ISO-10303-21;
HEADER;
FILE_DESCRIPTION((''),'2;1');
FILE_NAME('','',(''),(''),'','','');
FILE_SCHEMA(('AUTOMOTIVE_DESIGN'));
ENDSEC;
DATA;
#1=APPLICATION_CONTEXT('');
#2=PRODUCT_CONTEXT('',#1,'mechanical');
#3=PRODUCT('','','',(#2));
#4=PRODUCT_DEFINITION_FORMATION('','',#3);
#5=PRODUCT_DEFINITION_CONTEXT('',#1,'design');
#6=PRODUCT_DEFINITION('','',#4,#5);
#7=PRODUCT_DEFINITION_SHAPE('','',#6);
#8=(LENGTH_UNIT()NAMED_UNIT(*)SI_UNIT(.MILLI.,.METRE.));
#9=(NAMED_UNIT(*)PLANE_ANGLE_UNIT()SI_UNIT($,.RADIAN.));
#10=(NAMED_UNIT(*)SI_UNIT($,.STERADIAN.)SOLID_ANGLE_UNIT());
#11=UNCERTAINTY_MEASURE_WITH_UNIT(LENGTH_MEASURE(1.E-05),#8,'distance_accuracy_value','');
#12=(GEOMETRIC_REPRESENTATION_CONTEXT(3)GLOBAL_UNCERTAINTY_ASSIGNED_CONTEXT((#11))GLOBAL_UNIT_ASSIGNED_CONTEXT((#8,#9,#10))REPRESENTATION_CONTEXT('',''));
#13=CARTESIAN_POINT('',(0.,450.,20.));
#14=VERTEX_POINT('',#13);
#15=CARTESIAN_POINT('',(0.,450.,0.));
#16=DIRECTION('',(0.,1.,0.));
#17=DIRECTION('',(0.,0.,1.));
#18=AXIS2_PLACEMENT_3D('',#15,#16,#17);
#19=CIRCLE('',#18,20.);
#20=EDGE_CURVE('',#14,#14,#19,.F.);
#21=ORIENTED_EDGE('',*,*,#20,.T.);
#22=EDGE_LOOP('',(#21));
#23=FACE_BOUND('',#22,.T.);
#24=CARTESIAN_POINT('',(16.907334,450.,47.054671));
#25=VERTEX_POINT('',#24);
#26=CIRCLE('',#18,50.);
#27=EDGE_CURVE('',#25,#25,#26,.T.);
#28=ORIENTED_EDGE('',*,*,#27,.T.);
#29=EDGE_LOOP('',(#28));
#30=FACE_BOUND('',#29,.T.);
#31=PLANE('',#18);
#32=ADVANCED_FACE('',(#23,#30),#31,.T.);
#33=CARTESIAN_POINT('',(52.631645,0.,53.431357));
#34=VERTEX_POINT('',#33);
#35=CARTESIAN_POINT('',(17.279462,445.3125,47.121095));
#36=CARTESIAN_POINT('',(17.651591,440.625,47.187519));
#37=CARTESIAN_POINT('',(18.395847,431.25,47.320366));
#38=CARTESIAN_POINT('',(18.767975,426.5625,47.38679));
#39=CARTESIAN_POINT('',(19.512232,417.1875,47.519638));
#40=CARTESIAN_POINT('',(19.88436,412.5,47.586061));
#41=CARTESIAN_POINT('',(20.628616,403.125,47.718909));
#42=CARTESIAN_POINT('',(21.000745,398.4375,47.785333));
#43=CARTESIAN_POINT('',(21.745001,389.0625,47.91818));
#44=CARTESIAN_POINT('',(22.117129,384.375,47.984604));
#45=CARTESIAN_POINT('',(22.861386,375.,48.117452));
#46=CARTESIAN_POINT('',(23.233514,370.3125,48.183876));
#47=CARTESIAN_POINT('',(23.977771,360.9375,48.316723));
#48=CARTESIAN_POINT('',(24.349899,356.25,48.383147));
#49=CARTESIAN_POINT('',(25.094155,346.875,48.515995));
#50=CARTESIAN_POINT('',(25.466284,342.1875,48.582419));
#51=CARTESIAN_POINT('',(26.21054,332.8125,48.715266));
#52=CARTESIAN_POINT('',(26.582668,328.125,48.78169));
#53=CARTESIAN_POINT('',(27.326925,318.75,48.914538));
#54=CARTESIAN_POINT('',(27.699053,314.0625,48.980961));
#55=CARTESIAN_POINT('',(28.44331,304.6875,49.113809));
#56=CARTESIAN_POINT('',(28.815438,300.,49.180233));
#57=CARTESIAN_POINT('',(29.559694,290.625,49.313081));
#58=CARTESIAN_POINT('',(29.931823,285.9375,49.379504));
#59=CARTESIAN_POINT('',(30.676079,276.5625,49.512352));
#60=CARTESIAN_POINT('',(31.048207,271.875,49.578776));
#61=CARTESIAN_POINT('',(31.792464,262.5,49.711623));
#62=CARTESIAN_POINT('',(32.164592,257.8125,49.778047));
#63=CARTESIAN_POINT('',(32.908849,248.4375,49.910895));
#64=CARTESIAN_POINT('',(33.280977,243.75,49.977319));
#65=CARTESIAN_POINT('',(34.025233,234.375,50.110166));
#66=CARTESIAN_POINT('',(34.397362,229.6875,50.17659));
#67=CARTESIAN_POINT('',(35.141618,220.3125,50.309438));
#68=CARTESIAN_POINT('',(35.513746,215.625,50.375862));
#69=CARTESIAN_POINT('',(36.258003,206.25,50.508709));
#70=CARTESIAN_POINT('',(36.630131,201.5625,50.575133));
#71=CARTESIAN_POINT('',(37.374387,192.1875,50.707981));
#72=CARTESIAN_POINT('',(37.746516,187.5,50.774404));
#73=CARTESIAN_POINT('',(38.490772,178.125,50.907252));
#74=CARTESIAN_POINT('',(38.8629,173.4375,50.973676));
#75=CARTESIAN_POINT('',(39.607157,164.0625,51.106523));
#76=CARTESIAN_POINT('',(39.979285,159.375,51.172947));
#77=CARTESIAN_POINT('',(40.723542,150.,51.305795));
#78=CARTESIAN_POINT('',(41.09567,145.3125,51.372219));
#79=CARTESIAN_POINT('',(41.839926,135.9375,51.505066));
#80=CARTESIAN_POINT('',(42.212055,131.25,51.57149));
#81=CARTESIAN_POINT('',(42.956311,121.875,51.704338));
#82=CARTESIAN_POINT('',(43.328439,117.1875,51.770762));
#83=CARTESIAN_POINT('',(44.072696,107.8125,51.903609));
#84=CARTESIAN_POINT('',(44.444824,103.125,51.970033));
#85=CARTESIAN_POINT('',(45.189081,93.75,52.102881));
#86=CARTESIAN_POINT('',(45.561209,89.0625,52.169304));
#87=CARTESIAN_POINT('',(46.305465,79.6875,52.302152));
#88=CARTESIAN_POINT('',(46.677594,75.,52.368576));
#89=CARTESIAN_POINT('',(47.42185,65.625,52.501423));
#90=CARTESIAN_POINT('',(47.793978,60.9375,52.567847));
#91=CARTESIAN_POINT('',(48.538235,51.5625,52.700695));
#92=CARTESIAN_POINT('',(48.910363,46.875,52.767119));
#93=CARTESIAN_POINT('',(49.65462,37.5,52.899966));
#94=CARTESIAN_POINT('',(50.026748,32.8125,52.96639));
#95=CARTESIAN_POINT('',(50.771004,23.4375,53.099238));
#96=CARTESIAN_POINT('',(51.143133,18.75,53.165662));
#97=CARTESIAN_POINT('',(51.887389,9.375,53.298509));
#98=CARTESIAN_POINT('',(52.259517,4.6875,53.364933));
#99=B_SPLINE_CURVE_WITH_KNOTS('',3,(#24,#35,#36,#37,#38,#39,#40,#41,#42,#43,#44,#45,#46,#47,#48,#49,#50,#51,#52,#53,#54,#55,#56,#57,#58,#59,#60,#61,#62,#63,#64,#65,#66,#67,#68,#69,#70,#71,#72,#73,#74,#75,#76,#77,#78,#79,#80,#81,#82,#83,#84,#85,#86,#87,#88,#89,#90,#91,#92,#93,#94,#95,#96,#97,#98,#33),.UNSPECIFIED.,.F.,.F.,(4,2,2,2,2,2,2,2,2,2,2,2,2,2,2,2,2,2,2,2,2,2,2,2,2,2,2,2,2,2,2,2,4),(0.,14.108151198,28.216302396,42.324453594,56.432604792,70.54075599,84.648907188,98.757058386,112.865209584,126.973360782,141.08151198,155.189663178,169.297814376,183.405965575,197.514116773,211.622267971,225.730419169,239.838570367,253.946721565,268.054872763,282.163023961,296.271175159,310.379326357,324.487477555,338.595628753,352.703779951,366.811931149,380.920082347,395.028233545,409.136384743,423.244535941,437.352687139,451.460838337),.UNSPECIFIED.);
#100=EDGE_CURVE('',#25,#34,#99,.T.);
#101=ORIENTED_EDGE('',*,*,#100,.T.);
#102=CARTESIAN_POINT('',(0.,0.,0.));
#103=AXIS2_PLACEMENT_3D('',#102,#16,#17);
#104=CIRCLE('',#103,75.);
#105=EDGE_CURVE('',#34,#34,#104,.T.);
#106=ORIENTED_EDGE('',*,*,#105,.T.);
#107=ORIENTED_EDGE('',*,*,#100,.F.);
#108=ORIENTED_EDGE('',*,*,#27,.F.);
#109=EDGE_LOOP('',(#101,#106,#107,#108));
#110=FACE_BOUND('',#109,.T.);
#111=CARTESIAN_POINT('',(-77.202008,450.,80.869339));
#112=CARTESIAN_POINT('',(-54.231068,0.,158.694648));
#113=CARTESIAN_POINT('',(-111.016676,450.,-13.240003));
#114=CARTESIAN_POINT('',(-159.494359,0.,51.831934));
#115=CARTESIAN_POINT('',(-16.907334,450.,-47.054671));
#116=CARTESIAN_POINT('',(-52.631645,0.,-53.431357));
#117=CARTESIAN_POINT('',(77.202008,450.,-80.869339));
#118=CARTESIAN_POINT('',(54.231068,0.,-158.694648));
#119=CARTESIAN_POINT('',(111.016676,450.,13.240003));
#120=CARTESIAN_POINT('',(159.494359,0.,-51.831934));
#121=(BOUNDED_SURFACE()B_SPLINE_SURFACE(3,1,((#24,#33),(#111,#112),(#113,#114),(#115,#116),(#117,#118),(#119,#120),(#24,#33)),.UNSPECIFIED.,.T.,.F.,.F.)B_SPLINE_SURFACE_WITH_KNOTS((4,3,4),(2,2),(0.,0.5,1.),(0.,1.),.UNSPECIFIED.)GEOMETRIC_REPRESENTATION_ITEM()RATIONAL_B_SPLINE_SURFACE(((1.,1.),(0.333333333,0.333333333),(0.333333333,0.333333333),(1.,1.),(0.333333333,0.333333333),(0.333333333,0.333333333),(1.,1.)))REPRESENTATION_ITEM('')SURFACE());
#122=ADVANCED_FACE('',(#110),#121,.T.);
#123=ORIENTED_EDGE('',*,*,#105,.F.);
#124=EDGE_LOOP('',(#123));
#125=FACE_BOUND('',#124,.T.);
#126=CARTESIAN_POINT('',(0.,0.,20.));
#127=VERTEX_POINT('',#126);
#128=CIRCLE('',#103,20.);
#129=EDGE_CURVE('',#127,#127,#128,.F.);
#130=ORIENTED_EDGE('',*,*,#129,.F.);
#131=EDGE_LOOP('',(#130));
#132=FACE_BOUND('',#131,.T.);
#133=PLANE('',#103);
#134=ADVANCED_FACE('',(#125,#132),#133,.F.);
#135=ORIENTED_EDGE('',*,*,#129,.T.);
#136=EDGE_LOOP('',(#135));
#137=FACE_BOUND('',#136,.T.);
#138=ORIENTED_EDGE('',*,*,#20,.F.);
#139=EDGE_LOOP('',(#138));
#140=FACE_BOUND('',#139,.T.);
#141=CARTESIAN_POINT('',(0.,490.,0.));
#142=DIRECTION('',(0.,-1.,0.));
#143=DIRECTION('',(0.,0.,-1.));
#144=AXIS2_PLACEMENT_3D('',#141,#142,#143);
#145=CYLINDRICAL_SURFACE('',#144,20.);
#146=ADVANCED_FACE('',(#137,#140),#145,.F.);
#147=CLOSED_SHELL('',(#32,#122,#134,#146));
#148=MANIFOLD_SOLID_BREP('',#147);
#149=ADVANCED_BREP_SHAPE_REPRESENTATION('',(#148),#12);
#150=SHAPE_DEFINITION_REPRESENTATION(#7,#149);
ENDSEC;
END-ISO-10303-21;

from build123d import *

# Parameters (mm, degrees)
CORTAR_EXTRUIR1_DEPTH      = 40
CORTAR_EXTRUIR1_DEPTH_BACK = 529
CROQUIS4_R                 = 20


with BuildPart() as part:
    # Recubrir2: read off the stored shape, not the designer's step
    # Recubrir2: loft between two sections, ruled curve by curve
    recubrir2_from = [
        Edge.make_bspline([(16.90733403, 450, 47.054670927), (-77.202007823, 450, 80.869338986), (-111.016675883, 450, -13.240002867), (-16.90733403, 450, -47.054670927), (77.202007823, 450, -80.869338986), (111.016675883, 450, 13.240002867), (16.90733403, 450, 47.054670927)], [0, 0, 0, 0, 0.5, 0.5, 0.5, 1, 1, 1, 1], 3, [1, 0.333333333, 0.333333333, 1, 0.333333333, 0.333333333, 1]),
    ]
    recubrir2_to = [
        Edge.make_bspline([(52.631645486, 0, 53.431356837), (-54.231068189, 0, 158.694647809), (-159.49435916, 0, 51.831934134), (-52.631645486, 0, -53.431356837), (54.231068189, 0, -158.694647809), (159.49435916, 0, -51.831934134), (52.631645486, 0, 53.431356837)], [0, 0, 0, 0, 0.5, 0.5, 0.5, 1, 1, 1, 1], 3, [1, 0.333333333, 0.333333333, 1, 0.333333333, 0.333333333, 1]),
    ]
    recubrir2 = Solid(Shell([*[Face.make_surface_from_curves(recubrir2_from[k], recubrir2_to[k]) for k in range(1)], Face(Wire(recubrir2_from)), Face(Wire(recubrir2_to))]))
    add(recubrir2)

    # Croquis4 → Cortar-Extruir1 (cut, two sides: drawn at the far end of the back side and taken through both)
    with BuildSketch(Plane(origin=(0, 450, 0), x_dir=(1, 0, 0), z_dir=(0, 1, 0)).offset(-CORTAR_EXTRUIR1_DEPTH_BACK)):
        with Locations(Location((0, 0, 0), (0, 0, 270))):
            Circle(CROQUIS4_R)
    extrude(amount=CORTAR_EXTRUIR1_DEPTH + CORTAR_EXTRUIR1_DEPTH_BACK, mode=Mode.SUBTRACT)


solid = part.part
